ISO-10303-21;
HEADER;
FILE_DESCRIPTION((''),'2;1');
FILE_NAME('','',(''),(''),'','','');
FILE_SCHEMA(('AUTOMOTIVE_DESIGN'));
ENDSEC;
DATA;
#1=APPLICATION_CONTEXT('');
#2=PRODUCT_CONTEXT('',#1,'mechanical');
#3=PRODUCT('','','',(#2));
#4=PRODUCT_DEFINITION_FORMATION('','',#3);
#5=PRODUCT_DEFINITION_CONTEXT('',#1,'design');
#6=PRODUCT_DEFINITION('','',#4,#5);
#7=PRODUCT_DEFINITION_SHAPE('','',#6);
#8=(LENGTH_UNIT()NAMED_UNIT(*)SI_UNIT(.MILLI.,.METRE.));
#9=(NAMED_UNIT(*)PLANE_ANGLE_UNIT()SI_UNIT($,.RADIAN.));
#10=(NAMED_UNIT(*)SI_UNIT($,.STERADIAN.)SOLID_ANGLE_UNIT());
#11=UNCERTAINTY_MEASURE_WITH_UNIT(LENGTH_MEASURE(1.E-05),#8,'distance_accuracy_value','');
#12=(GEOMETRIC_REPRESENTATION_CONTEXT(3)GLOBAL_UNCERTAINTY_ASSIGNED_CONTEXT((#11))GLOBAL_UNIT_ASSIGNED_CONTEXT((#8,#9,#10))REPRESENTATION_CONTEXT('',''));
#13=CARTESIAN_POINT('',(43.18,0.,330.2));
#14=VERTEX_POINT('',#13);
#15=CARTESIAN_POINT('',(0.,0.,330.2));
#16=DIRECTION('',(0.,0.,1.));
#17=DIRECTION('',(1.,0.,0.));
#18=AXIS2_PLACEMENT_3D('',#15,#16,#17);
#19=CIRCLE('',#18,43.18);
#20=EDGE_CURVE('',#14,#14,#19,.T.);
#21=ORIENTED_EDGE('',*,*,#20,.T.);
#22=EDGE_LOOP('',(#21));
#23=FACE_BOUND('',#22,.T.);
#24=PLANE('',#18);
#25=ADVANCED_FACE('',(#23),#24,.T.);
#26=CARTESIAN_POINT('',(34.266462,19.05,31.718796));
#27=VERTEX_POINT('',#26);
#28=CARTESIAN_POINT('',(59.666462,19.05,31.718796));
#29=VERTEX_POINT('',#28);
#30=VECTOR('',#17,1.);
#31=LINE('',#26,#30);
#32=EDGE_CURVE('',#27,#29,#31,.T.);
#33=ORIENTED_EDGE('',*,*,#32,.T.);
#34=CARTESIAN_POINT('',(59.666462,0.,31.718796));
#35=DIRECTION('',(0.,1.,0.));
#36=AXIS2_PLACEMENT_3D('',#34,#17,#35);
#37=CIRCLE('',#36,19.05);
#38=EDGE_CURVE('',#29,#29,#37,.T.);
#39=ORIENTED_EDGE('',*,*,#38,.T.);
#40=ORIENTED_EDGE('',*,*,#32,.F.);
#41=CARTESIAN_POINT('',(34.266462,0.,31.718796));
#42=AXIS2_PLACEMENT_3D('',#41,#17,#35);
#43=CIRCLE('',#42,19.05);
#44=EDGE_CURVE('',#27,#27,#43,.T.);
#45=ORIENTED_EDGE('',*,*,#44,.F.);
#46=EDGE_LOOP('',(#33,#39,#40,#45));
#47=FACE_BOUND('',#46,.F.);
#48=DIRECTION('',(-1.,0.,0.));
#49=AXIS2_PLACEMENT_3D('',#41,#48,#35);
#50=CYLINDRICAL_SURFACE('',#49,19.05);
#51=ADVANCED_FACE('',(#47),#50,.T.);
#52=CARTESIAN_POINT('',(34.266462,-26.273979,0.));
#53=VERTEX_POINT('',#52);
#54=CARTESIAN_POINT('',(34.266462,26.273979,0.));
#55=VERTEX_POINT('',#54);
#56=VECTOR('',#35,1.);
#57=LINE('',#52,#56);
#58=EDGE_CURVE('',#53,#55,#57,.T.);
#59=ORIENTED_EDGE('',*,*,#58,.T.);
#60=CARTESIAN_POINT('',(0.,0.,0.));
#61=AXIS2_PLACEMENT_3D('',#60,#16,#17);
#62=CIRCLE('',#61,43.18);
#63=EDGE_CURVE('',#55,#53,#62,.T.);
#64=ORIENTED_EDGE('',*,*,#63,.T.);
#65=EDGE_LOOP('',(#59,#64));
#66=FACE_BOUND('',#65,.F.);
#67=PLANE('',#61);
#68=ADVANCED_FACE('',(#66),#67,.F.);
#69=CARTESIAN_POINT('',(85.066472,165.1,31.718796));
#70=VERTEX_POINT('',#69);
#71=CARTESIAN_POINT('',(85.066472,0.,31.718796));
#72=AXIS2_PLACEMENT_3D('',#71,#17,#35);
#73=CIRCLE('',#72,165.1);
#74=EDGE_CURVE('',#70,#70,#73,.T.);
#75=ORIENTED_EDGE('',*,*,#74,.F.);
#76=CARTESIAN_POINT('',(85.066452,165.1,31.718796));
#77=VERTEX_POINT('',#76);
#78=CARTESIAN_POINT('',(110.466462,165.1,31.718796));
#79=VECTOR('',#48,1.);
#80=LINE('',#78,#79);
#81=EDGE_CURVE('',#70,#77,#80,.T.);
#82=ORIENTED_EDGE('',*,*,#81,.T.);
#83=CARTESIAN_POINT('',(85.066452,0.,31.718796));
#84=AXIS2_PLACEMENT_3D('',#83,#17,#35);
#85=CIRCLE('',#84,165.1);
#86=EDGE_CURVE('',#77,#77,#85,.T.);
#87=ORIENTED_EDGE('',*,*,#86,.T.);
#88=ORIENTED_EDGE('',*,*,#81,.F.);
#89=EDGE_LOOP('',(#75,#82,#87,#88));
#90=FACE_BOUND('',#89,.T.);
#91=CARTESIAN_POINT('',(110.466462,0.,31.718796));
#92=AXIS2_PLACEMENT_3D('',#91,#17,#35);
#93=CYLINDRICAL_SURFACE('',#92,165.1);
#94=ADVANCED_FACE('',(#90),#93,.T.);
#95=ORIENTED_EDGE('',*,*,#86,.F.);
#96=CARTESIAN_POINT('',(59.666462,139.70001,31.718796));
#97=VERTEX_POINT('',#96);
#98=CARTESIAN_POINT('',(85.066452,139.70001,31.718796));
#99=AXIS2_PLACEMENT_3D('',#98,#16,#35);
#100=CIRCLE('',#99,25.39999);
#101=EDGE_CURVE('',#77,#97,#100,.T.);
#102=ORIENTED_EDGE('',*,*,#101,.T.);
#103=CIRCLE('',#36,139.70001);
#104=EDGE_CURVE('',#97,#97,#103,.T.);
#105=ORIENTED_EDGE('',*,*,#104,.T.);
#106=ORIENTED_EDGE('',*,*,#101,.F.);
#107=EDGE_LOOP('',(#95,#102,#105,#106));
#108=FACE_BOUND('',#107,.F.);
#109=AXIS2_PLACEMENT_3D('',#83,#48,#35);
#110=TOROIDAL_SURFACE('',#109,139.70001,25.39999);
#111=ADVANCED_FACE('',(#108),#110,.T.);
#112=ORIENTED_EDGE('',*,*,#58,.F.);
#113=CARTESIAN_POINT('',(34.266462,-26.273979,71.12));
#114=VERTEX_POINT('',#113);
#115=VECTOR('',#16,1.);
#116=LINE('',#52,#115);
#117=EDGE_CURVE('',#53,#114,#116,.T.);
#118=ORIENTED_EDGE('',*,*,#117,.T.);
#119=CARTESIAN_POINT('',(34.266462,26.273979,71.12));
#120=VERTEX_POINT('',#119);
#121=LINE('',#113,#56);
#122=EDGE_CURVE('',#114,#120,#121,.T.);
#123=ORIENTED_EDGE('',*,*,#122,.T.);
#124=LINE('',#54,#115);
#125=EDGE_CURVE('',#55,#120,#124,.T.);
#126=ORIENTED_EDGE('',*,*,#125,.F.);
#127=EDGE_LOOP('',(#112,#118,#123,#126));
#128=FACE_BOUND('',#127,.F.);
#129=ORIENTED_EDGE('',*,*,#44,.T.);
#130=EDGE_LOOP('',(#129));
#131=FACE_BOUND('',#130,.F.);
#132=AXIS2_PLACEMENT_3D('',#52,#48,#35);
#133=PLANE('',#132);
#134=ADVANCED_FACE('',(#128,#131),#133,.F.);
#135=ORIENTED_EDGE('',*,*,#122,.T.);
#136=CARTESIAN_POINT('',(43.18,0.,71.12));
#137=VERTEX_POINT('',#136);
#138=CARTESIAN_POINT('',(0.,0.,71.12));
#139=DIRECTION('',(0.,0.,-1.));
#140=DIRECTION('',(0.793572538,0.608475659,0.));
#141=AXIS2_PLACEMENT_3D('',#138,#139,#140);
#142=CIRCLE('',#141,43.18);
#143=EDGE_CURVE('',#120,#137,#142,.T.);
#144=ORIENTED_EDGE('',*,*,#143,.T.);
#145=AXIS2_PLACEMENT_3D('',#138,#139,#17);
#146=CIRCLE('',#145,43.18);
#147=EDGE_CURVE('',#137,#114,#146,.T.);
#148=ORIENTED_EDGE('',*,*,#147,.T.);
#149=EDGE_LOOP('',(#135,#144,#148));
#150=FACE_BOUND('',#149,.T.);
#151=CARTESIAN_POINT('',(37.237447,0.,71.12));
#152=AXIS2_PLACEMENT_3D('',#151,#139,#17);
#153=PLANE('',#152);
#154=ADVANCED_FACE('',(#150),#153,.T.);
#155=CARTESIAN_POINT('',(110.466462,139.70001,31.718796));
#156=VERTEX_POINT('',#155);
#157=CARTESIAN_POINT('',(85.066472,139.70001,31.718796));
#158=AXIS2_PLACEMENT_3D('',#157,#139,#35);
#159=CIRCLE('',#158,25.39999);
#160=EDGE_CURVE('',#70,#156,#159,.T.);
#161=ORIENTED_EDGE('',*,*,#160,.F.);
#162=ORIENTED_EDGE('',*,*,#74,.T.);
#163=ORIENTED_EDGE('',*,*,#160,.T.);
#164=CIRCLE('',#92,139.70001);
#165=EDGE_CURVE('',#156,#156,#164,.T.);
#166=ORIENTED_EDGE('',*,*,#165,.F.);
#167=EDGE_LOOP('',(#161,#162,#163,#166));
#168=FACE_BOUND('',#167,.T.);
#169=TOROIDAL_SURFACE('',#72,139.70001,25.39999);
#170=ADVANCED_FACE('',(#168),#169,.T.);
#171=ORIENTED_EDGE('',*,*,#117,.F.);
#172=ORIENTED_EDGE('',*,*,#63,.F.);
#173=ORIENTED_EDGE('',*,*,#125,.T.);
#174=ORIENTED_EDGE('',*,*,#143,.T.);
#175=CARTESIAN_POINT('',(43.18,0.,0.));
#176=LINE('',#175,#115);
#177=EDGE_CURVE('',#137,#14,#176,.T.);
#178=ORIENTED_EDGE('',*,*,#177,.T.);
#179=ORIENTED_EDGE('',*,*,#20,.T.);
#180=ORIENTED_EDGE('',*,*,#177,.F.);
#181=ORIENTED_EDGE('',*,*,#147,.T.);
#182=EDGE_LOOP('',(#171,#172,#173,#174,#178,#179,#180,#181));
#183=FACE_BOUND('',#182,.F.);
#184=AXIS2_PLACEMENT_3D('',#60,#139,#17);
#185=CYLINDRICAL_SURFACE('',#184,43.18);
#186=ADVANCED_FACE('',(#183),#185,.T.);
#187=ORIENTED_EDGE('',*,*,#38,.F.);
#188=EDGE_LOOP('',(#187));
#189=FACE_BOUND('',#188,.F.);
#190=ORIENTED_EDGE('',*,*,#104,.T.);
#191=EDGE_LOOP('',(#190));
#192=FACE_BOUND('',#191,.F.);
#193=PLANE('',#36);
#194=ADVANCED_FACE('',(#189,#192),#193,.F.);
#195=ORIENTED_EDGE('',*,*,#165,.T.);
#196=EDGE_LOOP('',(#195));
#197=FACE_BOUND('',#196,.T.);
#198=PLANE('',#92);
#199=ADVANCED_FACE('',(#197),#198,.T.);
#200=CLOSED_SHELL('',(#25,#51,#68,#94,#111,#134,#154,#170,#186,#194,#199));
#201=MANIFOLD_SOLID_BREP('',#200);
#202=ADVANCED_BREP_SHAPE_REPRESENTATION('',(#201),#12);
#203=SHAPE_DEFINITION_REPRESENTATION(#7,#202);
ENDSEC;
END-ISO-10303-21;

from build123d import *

# Parameters (mm, degrees)
F0_R     = 43.18
F1_DEPTH = 330.2
F3_DEPTH = 71.12
F4_R     = 19.05
F5_DEPTH = 76.2
F6_R     = 165.1
F6_R_2   = 19.05
F7_DEPTH = 50.8
F8_R     = 25.39999


# Not quite as in the source:
# - a fillet or chamfer is up to 0.001 mm smaller than in the source, because OpenCascade refuses the exact size


with BuildPart() as f1:
    # F0 (on Top) → F1 (new body)
    with BuildSketch(Plane.XY):
        Circle(F0_R)
    extrude(amount=F1_DEPTH)

    # F2 (on face) → F3 (cut)
    with BuildSketch(Plane(origin=(0, 0, 0), x_dir=(1, 0, 0), z_dir=(0, 0, -1))):
        with BuildLine():
            ThreePointArc((43.18, 0), (40.8909417637, 13.8723927885), (34.2664621733, 26.2739789549))
            Line((34.2664621733, 26.2739789549), (34.2664621733, -26.2739789549))
            ThreePointArc((34.2664621733, -26.2739789549), (40.8909417637, -13.8723927885), (43.18, 0))
        make_face()
    extrude(amount=-F3_DEPTH, mode=Mode.SUBTRACT)

    # F4 (on face) → F5 (join)
    with BuildSketch(Plane.YZ.offset(34.2664621733)):
        with Locations((0, 31.7187957861)):
            Circle(F4_R)
    extrude(amount=F5_DEPTH)

    # F6 (on face) → F7 (join)
    with BuildSketch(Plane.YZ.offset(110.4664621733)):
        with Locations((0, 31.7187957861)):
            Circle(F6_R)
        with Locations((0, 31.7187957861)):
            Circle(F6_R_2, mode=Mode.SUBTRACT)
    extrude(amount=-F7_DEPTH)

    # F8 (radius 25.4 in the source; OpenCascade refuses exactly that, so slightly less here)
    f8_edges = [f1.edges().sort_by_distance(p)[0] for p in [
        (110.466462, -165.1, 31.718796),
        (59.666462, -165.1, 31.718796),
    ]]
    fillet(f8_edges, radius=F8_R)


solid = f1.part
